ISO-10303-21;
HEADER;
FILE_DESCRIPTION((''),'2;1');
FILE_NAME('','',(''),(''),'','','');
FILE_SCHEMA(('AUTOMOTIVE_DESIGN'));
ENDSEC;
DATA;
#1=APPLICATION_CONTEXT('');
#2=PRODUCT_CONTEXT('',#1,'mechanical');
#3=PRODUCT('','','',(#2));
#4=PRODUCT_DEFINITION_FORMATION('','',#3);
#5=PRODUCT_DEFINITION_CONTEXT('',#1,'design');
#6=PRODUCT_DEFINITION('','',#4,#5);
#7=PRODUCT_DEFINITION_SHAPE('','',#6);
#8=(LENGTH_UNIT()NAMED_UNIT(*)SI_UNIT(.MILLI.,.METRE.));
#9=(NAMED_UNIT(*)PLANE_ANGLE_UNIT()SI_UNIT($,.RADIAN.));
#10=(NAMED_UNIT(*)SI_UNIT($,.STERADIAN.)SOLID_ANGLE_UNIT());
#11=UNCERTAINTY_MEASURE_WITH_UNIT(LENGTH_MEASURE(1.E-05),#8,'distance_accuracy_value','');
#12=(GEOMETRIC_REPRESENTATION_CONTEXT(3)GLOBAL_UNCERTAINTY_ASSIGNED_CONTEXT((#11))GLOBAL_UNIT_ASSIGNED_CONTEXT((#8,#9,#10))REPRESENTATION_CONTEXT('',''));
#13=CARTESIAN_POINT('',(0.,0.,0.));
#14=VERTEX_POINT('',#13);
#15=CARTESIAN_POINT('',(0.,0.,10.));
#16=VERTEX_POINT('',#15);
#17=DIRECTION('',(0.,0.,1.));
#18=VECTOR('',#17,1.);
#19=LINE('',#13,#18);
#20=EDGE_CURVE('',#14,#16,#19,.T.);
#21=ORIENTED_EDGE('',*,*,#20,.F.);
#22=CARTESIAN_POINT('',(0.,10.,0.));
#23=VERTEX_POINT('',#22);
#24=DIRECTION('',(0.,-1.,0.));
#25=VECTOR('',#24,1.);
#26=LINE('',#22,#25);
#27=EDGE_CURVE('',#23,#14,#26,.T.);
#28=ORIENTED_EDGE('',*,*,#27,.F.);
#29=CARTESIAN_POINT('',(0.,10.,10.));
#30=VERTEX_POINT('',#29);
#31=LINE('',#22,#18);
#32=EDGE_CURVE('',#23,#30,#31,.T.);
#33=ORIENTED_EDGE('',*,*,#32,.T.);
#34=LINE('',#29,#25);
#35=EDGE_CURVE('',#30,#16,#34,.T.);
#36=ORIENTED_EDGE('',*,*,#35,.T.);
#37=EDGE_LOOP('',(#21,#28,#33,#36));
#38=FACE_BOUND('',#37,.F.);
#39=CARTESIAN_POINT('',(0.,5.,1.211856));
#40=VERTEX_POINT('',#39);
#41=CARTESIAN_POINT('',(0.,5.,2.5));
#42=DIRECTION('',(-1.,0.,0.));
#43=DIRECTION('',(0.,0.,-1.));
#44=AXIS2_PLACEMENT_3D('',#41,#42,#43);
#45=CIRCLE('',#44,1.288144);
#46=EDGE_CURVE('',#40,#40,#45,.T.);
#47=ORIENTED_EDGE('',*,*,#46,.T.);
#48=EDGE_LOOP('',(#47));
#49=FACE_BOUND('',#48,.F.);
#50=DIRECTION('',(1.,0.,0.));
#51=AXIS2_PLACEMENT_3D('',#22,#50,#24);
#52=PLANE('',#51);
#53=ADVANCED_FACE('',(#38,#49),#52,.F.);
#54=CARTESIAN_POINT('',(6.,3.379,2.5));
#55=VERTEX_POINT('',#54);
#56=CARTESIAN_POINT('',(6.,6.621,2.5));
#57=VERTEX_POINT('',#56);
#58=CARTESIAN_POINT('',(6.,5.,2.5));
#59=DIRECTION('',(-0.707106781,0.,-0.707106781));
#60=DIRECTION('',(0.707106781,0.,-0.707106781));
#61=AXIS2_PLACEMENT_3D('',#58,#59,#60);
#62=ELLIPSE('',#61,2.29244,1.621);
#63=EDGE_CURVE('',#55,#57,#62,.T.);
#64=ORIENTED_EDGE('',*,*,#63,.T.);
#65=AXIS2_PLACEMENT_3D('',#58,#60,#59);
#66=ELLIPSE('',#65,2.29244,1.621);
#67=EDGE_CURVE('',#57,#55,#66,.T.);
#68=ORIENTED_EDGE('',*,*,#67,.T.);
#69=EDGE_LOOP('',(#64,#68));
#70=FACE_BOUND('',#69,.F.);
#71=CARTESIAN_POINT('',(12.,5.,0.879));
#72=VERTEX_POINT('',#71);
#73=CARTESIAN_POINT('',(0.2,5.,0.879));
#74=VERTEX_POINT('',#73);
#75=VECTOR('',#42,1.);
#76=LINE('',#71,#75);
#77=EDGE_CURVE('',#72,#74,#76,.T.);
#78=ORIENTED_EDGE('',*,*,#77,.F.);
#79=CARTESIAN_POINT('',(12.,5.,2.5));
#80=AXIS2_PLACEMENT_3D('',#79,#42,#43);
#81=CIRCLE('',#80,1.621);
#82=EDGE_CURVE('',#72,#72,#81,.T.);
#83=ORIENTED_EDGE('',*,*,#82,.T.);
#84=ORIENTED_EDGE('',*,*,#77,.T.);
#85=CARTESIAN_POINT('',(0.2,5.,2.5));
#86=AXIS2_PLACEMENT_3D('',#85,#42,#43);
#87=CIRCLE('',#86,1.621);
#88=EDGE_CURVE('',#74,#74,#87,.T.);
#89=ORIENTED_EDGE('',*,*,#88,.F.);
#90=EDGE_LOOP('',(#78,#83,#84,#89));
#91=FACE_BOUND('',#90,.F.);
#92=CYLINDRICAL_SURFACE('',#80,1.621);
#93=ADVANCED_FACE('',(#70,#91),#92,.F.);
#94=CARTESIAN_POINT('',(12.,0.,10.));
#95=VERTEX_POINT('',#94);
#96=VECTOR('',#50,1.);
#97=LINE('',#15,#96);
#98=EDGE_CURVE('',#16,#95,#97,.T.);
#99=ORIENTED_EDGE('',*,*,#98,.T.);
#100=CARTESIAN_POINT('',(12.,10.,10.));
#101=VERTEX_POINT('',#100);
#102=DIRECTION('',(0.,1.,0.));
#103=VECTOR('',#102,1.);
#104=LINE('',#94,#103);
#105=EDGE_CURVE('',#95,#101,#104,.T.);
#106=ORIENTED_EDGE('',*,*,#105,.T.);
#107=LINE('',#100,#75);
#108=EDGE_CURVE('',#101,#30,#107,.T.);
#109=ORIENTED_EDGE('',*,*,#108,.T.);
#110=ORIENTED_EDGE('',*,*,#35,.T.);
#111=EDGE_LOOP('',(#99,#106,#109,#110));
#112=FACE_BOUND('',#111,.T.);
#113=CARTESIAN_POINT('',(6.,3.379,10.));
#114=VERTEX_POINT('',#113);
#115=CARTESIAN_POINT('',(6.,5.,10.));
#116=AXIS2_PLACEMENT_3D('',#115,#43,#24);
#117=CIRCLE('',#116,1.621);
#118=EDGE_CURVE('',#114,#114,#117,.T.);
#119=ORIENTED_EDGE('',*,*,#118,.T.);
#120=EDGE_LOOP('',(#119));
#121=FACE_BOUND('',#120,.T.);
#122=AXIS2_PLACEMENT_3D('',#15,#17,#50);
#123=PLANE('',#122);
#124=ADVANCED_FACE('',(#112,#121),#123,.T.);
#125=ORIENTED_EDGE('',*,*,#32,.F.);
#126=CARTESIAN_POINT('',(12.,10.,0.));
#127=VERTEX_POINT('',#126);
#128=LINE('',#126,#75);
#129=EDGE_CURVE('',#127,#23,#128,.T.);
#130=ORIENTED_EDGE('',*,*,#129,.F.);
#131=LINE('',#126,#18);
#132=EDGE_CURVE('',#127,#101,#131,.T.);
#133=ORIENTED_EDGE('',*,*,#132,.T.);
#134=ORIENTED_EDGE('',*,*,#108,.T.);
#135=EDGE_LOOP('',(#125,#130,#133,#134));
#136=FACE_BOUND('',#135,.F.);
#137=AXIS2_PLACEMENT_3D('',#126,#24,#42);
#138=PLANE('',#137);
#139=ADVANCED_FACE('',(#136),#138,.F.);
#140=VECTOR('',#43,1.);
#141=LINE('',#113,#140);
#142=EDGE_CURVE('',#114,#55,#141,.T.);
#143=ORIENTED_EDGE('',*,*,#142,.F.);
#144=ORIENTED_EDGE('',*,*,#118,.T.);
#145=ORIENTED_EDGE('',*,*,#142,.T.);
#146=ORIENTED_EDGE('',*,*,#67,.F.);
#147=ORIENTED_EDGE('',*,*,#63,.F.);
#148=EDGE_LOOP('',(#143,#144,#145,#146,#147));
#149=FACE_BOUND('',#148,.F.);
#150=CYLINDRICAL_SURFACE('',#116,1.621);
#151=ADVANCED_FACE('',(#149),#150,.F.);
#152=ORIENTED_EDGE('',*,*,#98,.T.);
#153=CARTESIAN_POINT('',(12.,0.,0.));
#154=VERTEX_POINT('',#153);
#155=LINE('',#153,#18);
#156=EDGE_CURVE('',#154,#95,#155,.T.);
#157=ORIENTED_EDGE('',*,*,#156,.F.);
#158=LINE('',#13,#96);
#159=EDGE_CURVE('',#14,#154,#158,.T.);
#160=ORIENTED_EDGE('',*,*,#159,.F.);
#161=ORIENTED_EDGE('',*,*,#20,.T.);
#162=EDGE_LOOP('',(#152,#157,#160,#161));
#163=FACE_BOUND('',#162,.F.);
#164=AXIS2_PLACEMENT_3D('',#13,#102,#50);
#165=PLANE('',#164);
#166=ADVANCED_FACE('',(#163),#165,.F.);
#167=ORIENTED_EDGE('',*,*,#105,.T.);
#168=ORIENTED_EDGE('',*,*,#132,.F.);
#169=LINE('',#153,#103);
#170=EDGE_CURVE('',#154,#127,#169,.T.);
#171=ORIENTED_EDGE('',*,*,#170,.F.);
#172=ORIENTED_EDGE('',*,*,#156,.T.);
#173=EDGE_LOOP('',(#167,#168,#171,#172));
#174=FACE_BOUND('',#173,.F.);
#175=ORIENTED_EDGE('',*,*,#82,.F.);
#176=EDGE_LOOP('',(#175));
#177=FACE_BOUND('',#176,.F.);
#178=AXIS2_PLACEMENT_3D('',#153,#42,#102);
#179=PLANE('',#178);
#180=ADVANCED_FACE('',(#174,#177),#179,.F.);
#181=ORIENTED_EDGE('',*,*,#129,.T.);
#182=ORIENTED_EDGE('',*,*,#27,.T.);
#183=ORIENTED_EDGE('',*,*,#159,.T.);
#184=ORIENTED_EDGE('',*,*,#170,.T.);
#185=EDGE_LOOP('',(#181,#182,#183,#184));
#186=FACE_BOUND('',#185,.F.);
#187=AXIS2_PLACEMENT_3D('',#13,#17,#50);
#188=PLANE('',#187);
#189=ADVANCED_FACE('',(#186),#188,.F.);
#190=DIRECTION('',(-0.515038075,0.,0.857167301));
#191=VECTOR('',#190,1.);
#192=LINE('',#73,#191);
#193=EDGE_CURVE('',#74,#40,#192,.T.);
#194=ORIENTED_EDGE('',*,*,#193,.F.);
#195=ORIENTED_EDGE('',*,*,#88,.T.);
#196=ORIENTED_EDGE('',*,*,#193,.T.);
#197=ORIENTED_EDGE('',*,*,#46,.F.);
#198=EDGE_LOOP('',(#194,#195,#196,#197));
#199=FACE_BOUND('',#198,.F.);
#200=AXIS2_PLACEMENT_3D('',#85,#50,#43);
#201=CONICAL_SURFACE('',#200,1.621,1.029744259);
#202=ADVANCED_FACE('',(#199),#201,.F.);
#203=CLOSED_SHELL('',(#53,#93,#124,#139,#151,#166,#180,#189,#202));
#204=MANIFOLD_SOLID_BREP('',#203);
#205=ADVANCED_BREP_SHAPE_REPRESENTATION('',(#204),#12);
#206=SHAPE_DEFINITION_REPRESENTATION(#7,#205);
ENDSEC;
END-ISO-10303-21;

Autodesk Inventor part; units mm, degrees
ref_plane "YZ Plane" through (0, 0, 0) normal (1, 0, 0) x (0, 1, 0)
ref_plane "XZ Plane" through (0, 0, 0) normal (0, 1, 0) x (-1, 0, 0)
ref_plane "XY Plane" through (0, 0, 0) normal (0, 0, 1) x (1, 0, 0)
sketch "Skizze1" plane through (0, 0, 0) normal (0, 0, 1) x (1, 0, 0)
  line L0 (0, 0) -> (12, 0)
  line L1 (12, 0) -> (12, 10)
  line L2 (12, 10) -> (0, 10)
  line L3 (0, 10) -> (0, 0)
  dimension "d0" = 10
  dimension "d1" = 12
extrude "Extrusion1" add sketch "Skizze1" along normal blind 10
sketch "Skizze2" plane through (12, 0, 0) normal (1, 0, 0) x (0, 0, -1)
  line L0 (0, 0) -> (0, 10) projected
  line L1 (0, 10) -> (-10, 10) projected
  line L2 (-10, 0) -> (-10, 10) projected
  line L3 (0, 0) -> (-10, 0) projected
  line L4 (-10, 5) -> (0, 5) construction
  point P0 (-2.5, 5)
  dimension "d4" = 2.5
hole "Bohrung1" at (12, 5, 2.5) direction (-1, 0, 0) diameter 3.242 depth 11.8 tip angle 118 thread size "M4x0.7" class "6H" standard "ISO Metric profile"
sketch "Skizze3" plane through (0, 0, 10) normal (0, 0, 1) x (1, 0, 0)
  line L0 (0, 0) -> (12, 0) projected
  line L1 (12, 0) -> (12, 10) projected
  line L2 (12, 10) -> (0, 10) projected
  line L3 (0, 10) -> (0, 0) projected
  line L4 (12, 6.621) -> (12, 3.379) projected
  line L5 (0.2, 3.379) -> (0.2, 6.621) projected
  line L6 (-2.4, 5) -> (14.4, 5) projected
  line L7 (6, 0) -> (6, 10) construction
  point P0 (6, 5)
  point P1 (6, 5)
hole "Bohrung2" at (6, 5, 10) direction (0, 0, -1) diameter 3.242 end up to surface thread size "M4x0.7" class "6H" standard "ISO Metric profile"
properties part number "Alu_Belt_tens_3" material "Aluminium 6061"
